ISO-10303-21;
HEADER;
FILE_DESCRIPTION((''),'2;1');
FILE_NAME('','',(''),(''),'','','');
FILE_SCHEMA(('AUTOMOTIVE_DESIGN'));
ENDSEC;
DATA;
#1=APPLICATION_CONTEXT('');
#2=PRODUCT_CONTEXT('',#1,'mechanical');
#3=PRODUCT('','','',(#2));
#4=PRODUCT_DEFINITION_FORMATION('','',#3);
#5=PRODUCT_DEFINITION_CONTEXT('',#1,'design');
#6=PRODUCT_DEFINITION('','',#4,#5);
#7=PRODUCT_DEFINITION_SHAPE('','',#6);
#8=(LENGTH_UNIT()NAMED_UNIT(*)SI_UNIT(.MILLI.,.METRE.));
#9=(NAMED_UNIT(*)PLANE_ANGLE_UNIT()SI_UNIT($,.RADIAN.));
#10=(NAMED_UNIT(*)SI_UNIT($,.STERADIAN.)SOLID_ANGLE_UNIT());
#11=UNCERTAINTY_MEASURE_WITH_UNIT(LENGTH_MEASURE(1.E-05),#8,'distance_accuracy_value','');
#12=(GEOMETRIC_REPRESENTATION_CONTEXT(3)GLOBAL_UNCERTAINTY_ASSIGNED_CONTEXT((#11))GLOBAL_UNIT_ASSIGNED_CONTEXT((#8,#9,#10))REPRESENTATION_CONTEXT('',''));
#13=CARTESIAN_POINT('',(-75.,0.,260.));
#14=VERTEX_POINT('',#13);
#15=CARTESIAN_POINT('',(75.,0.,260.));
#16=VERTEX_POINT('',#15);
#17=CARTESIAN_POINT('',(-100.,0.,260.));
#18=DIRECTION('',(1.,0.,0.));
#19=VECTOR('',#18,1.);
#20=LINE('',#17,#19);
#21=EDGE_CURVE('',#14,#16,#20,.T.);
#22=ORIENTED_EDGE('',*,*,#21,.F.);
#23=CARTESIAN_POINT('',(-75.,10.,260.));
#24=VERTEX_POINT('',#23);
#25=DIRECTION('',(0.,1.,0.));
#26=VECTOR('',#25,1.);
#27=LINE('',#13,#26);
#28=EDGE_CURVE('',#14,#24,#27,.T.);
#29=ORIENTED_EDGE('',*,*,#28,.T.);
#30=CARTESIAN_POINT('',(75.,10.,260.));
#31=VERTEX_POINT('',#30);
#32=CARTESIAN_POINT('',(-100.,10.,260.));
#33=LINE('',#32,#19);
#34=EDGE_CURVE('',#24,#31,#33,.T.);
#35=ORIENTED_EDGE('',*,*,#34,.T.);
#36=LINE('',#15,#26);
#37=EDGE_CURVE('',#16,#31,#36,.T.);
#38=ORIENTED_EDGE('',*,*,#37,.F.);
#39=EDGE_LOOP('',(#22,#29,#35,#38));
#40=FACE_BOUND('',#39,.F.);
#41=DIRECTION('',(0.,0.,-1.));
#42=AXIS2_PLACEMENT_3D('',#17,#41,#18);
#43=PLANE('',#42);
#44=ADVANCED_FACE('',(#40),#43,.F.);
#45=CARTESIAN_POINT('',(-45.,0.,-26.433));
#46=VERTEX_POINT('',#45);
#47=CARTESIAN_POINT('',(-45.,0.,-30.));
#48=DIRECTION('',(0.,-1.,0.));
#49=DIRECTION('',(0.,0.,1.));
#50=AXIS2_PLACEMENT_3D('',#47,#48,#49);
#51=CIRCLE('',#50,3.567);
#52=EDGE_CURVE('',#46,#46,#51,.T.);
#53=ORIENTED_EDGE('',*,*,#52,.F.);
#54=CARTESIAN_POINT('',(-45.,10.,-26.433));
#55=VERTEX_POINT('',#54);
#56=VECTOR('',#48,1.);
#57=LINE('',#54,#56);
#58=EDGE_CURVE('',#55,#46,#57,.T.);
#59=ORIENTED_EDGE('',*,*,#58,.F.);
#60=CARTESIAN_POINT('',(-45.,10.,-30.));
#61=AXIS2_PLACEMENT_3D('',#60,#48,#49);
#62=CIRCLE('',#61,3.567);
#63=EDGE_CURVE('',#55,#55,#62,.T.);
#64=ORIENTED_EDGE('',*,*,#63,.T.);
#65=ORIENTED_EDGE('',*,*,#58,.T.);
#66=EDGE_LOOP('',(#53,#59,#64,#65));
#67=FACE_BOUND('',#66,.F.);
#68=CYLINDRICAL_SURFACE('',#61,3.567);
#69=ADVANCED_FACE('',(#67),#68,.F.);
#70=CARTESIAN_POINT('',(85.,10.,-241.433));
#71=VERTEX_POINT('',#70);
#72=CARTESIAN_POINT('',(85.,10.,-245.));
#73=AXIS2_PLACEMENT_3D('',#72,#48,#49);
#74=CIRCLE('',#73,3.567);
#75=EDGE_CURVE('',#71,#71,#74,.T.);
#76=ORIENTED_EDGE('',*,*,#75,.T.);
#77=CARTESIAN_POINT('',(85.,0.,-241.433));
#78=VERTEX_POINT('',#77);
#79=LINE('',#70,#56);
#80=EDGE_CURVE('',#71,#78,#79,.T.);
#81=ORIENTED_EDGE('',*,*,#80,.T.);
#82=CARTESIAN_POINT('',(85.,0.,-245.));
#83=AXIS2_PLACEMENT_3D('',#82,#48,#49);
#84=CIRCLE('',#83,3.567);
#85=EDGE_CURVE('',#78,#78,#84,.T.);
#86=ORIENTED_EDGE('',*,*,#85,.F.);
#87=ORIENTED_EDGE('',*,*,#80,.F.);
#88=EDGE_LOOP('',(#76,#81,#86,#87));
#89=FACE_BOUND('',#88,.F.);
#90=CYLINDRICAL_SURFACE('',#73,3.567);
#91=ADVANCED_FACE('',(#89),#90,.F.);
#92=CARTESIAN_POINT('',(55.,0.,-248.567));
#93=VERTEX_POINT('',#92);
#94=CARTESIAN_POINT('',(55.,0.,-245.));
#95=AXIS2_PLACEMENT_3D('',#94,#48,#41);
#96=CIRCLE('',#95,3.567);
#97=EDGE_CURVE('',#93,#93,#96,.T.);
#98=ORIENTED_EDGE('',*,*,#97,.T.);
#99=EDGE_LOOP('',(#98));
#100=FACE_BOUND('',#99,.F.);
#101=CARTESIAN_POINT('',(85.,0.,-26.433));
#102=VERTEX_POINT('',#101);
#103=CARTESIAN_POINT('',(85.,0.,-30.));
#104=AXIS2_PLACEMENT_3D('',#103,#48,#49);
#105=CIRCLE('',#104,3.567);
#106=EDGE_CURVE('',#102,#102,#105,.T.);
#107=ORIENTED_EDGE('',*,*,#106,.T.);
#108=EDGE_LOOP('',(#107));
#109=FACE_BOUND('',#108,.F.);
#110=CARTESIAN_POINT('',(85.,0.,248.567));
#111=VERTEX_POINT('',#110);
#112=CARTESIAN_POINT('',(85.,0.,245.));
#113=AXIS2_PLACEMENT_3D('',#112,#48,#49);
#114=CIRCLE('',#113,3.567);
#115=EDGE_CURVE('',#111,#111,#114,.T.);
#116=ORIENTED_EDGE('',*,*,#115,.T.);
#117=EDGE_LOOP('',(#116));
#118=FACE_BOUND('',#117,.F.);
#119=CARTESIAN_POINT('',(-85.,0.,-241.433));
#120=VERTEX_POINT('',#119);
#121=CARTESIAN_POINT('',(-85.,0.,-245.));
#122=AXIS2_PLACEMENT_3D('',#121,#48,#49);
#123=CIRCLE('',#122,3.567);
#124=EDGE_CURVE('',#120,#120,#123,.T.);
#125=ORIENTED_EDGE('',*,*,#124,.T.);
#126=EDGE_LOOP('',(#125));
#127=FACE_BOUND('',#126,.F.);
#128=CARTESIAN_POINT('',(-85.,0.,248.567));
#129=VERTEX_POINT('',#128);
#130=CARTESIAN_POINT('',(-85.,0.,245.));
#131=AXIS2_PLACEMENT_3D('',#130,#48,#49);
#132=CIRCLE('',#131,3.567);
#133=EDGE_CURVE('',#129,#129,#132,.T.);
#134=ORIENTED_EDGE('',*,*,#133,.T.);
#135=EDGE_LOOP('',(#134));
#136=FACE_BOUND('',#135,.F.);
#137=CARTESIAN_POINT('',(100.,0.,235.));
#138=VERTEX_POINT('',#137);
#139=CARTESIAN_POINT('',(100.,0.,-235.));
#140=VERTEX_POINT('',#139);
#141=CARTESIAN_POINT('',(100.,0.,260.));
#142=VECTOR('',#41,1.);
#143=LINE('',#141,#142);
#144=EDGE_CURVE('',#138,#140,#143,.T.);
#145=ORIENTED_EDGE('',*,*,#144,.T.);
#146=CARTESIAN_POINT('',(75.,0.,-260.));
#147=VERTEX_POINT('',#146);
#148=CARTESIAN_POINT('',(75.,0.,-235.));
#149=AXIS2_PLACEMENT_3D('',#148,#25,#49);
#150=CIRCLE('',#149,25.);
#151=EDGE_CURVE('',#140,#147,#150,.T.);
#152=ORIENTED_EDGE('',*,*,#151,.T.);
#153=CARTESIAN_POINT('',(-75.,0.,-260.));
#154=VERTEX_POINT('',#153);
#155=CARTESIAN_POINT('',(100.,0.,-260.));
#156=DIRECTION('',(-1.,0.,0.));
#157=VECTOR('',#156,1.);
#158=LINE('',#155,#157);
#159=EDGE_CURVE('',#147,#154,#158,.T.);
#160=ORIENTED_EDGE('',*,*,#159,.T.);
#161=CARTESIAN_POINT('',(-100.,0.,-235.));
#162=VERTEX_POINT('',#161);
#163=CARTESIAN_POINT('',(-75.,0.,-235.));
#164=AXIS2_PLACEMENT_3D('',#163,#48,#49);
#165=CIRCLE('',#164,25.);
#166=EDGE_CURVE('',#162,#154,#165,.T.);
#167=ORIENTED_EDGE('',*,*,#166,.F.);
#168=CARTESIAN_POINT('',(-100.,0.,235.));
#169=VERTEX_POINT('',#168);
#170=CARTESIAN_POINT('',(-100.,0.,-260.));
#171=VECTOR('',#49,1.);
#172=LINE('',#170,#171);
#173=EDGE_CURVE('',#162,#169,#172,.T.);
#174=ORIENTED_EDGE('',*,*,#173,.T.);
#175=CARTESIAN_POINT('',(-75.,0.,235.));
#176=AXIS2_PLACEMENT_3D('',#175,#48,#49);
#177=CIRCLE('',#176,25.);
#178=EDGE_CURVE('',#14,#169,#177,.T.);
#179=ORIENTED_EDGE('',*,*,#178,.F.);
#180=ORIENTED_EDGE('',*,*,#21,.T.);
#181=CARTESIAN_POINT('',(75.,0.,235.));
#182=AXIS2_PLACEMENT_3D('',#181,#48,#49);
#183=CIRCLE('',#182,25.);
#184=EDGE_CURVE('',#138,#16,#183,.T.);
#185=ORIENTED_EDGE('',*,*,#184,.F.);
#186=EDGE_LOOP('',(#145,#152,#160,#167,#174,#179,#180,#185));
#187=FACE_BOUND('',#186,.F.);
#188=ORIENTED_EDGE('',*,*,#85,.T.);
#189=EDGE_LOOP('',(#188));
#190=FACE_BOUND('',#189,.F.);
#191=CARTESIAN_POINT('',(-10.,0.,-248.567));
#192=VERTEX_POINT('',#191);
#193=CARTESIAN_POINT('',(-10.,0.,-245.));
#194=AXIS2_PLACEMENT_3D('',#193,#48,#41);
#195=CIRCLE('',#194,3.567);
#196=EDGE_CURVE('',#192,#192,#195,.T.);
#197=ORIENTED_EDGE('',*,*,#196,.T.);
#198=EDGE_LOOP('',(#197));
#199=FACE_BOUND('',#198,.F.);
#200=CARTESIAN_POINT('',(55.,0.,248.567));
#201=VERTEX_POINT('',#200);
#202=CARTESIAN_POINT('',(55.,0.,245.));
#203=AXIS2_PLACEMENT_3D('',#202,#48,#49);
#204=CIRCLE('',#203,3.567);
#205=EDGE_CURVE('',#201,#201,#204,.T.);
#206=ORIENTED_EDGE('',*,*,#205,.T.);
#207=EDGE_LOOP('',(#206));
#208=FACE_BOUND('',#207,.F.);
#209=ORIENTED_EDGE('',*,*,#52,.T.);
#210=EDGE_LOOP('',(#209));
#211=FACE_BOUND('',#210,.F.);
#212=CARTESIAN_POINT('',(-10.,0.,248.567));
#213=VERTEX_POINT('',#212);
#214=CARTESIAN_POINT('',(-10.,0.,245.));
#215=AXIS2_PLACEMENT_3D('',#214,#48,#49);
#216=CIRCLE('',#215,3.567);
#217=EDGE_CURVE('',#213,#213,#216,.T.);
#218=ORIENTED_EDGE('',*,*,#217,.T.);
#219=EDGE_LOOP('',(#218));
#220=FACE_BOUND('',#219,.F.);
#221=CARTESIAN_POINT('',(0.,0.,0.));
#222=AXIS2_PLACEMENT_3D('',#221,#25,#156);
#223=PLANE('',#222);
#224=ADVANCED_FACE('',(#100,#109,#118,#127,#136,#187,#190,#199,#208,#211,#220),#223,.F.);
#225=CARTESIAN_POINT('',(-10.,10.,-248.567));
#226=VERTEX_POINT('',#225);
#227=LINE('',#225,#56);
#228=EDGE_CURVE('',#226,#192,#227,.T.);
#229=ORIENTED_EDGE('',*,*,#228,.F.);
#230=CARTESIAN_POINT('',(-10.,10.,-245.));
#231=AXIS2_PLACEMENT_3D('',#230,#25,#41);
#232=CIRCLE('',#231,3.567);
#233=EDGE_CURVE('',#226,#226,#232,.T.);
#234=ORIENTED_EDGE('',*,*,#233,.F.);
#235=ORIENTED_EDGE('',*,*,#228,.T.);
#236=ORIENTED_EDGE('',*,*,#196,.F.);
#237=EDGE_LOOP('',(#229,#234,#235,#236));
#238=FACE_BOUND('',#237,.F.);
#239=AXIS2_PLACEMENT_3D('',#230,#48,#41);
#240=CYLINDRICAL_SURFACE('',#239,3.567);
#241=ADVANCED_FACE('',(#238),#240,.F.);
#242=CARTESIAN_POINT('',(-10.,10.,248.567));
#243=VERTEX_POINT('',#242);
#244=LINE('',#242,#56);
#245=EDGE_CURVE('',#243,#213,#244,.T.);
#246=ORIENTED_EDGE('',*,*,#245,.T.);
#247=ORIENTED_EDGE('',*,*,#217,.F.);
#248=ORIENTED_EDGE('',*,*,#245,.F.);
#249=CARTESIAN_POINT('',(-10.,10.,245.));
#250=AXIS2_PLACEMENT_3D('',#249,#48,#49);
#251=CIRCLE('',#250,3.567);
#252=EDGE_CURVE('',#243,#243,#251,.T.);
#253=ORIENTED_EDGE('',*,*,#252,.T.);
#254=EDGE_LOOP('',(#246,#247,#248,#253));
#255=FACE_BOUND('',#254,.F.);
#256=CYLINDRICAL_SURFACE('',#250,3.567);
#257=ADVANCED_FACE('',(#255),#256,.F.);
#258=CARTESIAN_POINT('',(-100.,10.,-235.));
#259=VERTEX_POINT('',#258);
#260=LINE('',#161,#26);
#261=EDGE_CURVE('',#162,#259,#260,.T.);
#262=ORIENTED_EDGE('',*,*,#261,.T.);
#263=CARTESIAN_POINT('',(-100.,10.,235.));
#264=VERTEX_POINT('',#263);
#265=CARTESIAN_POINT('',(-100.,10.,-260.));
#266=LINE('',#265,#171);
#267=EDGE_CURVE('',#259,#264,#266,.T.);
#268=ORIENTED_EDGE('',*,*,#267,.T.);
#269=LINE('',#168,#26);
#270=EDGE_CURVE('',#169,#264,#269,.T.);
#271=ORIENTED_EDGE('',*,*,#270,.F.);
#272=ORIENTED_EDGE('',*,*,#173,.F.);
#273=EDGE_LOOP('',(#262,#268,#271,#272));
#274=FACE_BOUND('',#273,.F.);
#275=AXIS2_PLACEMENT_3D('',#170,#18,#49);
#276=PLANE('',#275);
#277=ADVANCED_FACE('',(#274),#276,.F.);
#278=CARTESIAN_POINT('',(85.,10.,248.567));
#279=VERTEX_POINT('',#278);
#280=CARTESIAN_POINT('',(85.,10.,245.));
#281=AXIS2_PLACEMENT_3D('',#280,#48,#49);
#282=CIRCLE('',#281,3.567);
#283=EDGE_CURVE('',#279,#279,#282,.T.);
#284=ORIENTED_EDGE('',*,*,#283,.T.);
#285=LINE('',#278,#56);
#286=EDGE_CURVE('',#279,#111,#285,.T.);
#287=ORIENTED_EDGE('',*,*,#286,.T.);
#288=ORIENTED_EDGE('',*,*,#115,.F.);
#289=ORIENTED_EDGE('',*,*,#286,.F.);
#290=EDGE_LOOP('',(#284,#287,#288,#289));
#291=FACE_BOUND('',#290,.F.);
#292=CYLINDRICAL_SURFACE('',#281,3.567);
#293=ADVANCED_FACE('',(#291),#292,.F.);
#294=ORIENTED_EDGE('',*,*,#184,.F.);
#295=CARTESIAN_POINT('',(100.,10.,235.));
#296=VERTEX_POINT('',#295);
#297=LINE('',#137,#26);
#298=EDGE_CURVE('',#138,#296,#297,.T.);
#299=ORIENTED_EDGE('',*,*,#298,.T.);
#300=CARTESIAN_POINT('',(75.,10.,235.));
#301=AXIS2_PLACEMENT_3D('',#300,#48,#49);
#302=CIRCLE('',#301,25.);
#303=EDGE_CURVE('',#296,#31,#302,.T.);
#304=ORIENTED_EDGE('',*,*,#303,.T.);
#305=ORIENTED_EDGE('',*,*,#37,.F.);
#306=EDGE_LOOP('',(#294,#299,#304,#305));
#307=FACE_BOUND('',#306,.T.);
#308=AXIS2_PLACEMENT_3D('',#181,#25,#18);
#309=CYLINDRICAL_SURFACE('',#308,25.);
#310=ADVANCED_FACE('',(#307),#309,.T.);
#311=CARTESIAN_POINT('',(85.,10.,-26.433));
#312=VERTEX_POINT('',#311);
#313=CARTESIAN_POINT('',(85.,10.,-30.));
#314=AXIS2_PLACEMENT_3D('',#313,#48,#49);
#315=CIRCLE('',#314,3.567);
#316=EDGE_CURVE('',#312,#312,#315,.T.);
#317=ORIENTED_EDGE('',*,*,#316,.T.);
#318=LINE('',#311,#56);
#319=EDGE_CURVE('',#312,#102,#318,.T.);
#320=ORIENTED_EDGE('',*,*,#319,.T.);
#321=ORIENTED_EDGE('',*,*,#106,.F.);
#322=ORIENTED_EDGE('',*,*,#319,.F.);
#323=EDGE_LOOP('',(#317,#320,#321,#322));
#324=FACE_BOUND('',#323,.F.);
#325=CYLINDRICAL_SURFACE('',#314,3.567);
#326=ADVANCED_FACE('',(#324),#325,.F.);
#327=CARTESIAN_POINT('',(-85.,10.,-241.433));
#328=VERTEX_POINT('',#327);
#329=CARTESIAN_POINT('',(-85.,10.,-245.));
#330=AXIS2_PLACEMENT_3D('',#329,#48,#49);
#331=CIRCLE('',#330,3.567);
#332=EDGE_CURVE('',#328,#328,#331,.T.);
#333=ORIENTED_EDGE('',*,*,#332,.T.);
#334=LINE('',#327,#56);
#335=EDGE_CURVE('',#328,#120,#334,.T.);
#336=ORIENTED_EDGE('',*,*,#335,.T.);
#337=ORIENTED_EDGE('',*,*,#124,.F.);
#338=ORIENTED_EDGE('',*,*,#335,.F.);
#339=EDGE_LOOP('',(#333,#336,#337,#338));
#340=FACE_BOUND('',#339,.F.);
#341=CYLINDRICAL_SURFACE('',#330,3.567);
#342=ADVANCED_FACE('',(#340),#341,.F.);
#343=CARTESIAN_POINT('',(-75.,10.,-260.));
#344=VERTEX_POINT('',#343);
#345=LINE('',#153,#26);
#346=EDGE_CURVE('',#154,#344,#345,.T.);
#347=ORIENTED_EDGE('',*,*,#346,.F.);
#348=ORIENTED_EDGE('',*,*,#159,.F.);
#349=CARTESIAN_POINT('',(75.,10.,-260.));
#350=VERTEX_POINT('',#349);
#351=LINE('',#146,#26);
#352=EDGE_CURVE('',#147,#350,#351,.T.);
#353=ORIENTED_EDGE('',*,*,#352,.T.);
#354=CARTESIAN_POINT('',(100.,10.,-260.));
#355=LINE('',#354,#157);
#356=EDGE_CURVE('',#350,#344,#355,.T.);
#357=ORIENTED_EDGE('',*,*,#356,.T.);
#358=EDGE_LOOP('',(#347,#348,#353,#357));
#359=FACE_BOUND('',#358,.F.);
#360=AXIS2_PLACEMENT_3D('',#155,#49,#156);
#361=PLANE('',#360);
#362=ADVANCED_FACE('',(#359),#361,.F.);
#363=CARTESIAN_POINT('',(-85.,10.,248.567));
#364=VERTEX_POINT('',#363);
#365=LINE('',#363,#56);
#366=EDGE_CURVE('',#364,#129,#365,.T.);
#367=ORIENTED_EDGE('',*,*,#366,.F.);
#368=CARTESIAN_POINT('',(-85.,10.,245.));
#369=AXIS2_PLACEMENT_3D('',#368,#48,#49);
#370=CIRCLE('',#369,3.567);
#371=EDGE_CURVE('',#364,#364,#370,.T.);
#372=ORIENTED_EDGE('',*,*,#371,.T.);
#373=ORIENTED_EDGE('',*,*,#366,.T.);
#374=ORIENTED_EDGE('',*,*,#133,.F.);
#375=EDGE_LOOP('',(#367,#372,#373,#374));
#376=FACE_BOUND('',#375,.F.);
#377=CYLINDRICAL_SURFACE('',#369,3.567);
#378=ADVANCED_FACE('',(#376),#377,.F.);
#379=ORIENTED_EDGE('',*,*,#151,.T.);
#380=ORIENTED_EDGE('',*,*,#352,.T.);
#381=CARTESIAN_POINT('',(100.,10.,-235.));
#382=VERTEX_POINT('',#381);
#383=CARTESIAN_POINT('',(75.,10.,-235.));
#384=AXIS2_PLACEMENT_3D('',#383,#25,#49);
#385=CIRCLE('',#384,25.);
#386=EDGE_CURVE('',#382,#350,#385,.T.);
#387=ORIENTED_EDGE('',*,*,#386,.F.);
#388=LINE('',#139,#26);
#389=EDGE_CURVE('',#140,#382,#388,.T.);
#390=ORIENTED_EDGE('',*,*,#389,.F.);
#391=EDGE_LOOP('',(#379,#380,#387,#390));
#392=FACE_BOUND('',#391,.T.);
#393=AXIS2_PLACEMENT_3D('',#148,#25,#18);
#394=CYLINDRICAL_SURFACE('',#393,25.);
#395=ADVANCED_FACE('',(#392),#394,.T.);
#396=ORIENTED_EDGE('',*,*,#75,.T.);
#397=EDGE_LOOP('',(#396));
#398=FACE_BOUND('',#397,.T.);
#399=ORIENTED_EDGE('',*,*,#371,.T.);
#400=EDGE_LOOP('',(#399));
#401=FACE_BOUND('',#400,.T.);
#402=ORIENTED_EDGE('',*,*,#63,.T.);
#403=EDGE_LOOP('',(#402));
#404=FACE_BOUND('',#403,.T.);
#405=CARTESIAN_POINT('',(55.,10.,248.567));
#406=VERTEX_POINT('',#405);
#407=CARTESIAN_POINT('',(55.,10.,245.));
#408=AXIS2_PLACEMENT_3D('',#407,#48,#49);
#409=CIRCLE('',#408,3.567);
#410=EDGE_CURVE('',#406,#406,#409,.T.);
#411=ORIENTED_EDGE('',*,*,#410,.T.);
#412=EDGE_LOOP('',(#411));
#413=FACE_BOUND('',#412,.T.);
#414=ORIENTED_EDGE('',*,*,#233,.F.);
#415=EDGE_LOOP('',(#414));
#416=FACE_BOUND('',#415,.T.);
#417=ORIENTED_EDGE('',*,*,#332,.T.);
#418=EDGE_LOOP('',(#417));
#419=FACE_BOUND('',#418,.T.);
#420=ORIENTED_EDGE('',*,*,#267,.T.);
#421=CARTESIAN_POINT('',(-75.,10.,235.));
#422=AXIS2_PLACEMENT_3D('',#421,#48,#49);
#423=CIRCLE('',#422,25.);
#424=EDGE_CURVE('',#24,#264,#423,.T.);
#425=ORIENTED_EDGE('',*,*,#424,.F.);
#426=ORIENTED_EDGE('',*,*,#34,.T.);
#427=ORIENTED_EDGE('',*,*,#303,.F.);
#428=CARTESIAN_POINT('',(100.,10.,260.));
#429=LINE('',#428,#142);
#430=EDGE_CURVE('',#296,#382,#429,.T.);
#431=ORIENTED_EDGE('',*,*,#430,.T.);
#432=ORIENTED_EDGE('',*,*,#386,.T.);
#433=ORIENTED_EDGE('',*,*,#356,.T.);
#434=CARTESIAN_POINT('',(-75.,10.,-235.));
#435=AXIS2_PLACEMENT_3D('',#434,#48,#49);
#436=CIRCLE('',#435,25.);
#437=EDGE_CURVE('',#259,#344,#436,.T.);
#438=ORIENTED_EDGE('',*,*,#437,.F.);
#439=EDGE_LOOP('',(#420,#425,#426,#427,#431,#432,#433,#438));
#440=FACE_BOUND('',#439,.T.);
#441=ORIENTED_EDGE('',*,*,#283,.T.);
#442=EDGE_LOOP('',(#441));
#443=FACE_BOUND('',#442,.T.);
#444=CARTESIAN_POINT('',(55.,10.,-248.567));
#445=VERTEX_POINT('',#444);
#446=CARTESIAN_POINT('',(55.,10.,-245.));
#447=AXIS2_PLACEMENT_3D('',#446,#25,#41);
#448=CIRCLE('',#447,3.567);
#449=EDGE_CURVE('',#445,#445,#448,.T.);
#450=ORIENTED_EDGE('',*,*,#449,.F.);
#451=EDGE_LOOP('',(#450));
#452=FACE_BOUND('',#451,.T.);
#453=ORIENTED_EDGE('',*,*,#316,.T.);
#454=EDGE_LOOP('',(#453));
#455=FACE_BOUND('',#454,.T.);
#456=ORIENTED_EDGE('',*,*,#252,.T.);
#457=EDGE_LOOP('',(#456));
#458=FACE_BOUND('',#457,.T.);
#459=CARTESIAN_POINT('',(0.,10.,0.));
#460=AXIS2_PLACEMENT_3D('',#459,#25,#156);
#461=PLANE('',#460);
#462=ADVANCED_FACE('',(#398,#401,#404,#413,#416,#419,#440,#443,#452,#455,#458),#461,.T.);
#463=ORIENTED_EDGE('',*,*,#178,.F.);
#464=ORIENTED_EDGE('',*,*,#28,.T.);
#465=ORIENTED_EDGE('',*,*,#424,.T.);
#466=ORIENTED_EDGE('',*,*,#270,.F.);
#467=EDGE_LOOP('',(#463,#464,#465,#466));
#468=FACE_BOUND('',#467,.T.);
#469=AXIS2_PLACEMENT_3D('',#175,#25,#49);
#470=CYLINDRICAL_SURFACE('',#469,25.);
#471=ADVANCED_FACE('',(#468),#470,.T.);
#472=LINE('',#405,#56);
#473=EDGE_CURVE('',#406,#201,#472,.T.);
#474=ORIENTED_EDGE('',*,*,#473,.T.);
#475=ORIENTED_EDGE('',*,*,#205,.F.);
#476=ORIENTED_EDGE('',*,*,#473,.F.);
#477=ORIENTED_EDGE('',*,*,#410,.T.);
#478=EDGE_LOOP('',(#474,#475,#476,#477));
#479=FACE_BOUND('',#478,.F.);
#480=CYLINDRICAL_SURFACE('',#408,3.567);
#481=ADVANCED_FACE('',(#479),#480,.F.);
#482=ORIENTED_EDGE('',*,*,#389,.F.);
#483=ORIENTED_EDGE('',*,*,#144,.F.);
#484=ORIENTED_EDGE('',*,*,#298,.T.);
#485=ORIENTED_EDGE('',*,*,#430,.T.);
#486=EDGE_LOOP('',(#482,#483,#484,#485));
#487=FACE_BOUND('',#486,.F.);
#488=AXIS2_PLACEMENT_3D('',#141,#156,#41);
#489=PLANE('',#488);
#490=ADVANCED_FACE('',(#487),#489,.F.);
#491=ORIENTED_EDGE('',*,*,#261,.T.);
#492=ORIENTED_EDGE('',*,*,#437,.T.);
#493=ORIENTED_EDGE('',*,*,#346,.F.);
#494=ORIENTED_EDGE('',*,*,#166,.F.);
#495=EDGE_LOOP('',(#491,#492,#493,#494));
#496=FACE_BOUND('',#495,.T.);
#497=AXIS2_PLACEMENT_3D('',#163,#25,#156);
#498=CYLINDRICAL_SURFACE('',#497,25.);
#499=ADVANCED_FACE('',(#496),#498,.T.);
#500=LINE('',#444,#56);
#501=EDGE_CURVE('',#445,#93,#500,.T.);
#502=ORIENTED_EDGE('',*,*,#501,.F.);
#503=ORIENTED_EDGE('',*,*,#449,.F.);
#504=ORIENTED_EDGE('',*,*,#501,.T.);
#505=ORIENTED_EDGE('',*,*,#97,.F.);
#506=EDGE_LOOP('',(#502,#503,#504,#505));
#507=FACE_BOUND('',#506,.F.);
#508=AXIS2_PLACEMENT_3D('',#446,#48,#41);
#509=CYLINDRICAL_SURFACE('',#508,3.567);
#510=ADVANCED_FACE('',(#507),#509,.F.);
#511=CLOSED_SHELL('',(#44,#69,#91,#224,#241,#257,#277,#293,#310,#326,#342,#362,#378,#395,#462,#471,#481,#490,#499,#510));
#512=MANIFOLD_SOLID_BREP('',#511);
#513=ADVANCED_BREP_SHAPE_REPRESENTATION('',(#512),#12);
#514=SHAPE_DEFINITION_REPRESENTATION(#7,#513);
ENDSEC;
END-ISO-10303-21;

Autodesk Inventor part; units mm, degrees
ref_plane "YZ Plane" through (0, 0, 0) normal (1, 0, 0) x (0, 1, 0)
ref_plane "XZ Plane" through (0, 0, 0) normal (0, 1, 0) x (-1, 0, 0)
ref_plane "XY Plane" through (0, 0, 0) normal (0, 0, 1) x (1, 0, 0)
sketch "Sketch1" plane through (0, 0, 0) normal (0, 1, 0) x (-1, 0, 0)
  line L0 (-100, -260) -> (100, -260)
  line L1 (100, -260) -> (100, 260)
  line L2 (100, 260) -> (-100, 260)
  line L3 (-100, 260) -> (-100, -260)
  line L4 (-100, -260) -> (100, 260) construction
  line L5 (100, -260) -> (-100, 260) construction
  point P0 (0, 0)
  dimension "d0" = 200
  dimension "d1" = 520
extrude "Extrusion1" add sketch "Sketch1" along normal blind 10
fillet "Fillet1" radius 25 4 edges at (-100, 5, -260) (-100, 5, 260) (100, 5, 260) (100, 5, -260)
sketch "Sketch2" plane through (0, 10, 0) normal (0, 1, 0) x (1, 0, 0)
  line L0 (100, -235) -> (100, 235) projected
  line L1 (-75, -260) -> (75, -260) projected
  point P0 (0, 0)
  point P1 (85, -245)
  dimension "d5" = 15
  dimension "d6" = 15
hole "Hole1" at (85, 10, 245) direction (0, -1, 0) diameter 7.134 end through all thread size "M8x0.8" class "6H" standard "ISO Metric profile"
pattern_linear "Rectangular Pattern1" count 2 spacing 170 along (-1, 0, 0) count 2 spacing 490 along (0, 0, -1) of "Hole1"
sketch "Sketch3" plane through (0, 10, 0) normal (0, 1, 0) x (1, 0, 0)
  line L0 (-75, -260) -> (75, -260) projected
  line L1 (-100, 235) -> (-100, -235) projected
  point P0 (0, 0)
  point P1 (-10, -245)
  point P2 (55, -245)
  dimension "d20" = 15
  dimension "d21" = 90
  dimension "d22" = 65
  dimension "d23" = 15
hole "Hole2" at (-10, 10, 245) at (55, 10, 245) direction (0, -1, 0) diameter 7.134 end through all thread size "M8x0.8" class "6H" standard "ISO Metric profile"
mirror "Mirror1" about plane through (0, 0, 0) normal (0, 0, 1) of "Hole2"
sketch "Sketch4" plane through (0, 10, 0) normal (0, 1, 0) x (1, 0, 0)
  line L0 (75, 260) -> (-75, 260) projected
  line L1 (100, -235) -> (100, 235) projected
  point P0 (0, 0)
  point P1 (-45, 30)
  point P2 (85, 30)
  dimension "d31" = 230
  dimension "d32" = 145
  dimension "d33" = 230
  dimension "d34" = 15
hole "Hole3" at (-45, 10, -30) at (85, 10, -30) direction (0, -1, 0) diameter 7.134 end through all thread size "M8x0.8" class "6H" standard "ISO Metric profile"
properties part number "Top_plate" material "Stainless Steel"
